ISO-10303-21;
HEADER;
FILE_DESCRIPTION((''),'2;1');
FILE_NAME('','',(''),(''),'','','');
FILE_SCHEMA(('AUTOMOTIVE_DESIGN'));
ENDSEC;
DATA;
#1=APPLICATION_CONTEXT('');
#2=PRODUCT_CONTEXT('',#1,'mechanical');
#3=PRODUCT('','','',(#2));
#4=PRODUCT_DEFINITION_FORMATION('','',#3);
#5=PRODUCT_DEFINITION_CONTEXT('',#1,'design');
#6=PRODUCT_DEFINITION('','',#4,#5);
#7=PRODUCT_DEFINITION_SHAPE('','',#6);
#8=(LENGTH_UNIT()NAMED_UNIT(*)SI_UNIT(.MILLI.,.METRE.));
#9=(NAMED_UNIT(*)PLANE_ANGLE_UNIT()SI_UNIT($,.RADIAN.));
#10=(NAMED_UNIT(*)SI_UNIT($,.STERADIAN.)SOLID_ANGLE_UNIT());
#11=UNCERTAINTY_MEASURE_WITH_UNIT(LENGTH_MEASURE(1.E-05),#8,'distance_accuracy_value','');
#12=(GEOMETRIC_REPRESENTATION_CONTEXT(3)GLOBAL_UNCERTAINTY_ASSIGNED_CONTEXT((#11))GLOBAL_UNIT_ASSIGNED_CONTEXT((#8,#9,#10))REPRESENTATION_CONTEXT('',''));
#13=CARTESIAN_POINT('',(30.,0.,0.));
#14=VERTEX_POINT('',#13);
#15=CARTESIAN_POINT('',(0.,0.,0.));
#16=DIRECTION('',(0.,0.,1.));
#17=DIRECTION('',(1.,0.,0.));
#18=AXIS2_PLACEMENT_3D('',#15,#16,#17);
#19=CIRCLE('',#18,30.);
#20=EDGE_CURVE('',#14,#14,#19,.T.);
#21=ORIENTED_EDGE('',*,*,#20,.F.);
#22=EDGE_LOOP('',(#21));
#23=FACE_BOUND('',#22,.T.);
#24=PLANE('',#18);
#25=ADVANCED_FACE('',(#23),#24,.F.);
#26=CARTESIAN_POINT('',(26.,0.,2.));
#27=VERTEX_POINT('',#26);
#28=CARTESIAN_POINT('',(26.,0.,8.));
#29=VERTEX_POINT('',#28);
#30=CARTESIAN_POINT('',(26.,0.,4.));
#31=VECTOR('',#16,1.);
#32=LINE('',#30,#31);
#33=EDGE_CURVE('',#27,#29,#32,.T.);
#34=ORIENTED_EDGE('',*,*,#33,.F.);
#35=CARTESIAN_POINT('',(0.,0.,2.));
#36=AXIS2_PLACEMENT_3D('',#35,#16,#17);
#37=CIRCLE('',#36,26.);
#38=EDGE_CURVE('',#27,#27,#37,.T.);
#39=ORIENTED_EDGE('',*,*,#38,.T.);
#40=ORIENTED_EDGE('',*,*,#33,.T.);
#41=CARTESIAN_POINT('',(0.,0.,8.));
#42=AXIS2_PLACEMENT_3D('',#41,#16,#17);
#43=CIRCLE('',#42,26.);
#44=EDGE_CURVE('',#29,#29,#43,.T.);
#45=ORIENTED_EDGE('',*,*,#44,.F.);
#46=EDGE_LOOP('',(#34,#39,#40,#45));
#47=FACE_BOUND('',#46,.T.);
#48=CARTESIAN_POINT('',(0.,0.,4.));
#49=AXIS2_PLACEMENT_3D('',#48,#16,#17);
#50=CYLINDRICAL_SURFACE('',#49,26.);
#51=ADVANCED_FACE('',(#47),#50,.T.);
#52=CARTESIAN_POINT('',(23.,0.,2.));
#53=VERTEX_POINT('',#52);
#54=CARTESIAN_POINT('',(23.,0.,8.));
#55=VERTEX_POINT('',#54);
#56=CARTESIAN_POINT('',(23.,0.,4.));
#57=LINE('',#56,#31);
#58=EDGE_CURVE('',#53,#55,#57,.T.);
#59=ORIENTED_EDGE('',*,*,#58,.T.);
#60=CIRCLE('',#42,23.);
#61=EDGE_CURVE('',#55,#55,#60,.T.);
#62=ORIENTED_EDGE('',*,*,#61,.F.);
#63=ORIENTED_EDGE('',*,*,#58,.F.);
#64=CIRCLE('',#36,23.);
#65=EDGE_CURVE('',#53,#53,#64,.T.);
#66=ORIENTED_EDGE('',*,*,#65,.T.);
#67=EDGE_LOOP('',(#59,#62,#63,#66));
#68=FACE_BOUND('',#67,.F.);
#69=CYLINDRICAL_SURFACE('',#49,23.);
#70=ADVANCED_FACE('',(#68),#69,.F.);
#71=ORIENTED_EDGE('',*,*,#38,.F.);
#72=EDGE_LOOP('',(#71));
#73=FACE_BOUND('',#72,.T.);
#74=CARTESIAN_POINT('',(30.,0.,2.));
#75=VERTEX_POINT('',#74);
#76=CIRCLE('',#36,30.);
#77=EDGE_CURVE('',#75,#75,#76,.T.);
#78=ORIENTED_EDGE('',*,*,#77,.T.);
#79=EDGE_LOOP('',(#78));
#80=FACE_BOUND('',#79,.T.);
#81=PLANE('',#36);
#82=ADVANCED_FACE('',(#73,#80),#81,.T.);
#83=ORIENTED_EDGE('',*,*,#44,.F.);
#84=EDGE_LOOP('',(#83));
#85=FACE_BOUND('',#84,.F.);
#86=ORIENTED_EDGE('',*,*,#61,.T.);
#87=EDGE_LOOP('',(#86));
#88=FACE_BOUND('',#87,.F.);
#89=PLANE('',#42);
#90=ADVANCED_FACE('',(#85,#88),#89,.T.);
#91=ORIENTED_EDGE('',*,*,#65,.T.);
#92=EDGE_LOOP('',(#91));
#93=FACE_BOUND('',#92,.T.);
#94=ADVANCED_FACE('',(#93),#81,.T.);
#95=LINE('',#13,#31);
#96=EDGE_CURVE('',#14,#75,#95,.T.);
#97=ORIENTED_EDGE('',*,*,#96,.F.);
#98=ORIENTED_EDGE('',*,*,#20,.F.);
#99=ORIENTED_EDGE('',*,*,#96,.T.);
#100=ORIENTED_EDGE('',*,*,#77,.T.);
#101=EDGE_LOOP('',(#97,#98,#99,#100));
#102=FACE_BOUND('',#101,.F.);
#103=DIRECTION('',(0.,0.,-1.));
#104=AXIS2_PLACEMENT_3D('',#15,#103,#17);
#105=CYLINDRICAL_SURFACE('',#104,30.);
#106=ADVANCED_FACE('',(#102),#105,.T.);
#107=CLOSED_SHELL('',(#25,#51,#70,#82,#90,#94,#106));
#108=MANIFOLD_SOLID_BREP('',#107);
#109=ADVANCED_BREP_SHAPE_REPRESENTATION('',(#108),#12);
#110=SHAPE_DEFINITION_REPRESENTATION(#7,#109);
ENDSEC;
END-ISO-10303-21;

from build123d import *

# Parameters (mm, degrees)
F0_R     = 30
F1_DEPTH = 2
F2_W     = 3
F2_H     = 8


# Not quite as in the source:
# - the program builds the solid bodies; features that only make, move or delete a surface that nothing else refers to are left out


with BuildPart() as f1:
    # F0 (on Top) → F1 (new body)
    with BuildSketch(Plane.XY):
        Circle(F0_R)
    extrude(amount=F1_DEPTH)

    # F2 (on Front) → F3 (revolve)
    with BuildSketch(Plane.XZ):
        with Locations((24.5, 4)):
            Rectangle(F2_W, F2_H)
    revolve(axis=Axis((0, 0, 15.4871546511), (0, 0, 1)))


solid = f1.part
